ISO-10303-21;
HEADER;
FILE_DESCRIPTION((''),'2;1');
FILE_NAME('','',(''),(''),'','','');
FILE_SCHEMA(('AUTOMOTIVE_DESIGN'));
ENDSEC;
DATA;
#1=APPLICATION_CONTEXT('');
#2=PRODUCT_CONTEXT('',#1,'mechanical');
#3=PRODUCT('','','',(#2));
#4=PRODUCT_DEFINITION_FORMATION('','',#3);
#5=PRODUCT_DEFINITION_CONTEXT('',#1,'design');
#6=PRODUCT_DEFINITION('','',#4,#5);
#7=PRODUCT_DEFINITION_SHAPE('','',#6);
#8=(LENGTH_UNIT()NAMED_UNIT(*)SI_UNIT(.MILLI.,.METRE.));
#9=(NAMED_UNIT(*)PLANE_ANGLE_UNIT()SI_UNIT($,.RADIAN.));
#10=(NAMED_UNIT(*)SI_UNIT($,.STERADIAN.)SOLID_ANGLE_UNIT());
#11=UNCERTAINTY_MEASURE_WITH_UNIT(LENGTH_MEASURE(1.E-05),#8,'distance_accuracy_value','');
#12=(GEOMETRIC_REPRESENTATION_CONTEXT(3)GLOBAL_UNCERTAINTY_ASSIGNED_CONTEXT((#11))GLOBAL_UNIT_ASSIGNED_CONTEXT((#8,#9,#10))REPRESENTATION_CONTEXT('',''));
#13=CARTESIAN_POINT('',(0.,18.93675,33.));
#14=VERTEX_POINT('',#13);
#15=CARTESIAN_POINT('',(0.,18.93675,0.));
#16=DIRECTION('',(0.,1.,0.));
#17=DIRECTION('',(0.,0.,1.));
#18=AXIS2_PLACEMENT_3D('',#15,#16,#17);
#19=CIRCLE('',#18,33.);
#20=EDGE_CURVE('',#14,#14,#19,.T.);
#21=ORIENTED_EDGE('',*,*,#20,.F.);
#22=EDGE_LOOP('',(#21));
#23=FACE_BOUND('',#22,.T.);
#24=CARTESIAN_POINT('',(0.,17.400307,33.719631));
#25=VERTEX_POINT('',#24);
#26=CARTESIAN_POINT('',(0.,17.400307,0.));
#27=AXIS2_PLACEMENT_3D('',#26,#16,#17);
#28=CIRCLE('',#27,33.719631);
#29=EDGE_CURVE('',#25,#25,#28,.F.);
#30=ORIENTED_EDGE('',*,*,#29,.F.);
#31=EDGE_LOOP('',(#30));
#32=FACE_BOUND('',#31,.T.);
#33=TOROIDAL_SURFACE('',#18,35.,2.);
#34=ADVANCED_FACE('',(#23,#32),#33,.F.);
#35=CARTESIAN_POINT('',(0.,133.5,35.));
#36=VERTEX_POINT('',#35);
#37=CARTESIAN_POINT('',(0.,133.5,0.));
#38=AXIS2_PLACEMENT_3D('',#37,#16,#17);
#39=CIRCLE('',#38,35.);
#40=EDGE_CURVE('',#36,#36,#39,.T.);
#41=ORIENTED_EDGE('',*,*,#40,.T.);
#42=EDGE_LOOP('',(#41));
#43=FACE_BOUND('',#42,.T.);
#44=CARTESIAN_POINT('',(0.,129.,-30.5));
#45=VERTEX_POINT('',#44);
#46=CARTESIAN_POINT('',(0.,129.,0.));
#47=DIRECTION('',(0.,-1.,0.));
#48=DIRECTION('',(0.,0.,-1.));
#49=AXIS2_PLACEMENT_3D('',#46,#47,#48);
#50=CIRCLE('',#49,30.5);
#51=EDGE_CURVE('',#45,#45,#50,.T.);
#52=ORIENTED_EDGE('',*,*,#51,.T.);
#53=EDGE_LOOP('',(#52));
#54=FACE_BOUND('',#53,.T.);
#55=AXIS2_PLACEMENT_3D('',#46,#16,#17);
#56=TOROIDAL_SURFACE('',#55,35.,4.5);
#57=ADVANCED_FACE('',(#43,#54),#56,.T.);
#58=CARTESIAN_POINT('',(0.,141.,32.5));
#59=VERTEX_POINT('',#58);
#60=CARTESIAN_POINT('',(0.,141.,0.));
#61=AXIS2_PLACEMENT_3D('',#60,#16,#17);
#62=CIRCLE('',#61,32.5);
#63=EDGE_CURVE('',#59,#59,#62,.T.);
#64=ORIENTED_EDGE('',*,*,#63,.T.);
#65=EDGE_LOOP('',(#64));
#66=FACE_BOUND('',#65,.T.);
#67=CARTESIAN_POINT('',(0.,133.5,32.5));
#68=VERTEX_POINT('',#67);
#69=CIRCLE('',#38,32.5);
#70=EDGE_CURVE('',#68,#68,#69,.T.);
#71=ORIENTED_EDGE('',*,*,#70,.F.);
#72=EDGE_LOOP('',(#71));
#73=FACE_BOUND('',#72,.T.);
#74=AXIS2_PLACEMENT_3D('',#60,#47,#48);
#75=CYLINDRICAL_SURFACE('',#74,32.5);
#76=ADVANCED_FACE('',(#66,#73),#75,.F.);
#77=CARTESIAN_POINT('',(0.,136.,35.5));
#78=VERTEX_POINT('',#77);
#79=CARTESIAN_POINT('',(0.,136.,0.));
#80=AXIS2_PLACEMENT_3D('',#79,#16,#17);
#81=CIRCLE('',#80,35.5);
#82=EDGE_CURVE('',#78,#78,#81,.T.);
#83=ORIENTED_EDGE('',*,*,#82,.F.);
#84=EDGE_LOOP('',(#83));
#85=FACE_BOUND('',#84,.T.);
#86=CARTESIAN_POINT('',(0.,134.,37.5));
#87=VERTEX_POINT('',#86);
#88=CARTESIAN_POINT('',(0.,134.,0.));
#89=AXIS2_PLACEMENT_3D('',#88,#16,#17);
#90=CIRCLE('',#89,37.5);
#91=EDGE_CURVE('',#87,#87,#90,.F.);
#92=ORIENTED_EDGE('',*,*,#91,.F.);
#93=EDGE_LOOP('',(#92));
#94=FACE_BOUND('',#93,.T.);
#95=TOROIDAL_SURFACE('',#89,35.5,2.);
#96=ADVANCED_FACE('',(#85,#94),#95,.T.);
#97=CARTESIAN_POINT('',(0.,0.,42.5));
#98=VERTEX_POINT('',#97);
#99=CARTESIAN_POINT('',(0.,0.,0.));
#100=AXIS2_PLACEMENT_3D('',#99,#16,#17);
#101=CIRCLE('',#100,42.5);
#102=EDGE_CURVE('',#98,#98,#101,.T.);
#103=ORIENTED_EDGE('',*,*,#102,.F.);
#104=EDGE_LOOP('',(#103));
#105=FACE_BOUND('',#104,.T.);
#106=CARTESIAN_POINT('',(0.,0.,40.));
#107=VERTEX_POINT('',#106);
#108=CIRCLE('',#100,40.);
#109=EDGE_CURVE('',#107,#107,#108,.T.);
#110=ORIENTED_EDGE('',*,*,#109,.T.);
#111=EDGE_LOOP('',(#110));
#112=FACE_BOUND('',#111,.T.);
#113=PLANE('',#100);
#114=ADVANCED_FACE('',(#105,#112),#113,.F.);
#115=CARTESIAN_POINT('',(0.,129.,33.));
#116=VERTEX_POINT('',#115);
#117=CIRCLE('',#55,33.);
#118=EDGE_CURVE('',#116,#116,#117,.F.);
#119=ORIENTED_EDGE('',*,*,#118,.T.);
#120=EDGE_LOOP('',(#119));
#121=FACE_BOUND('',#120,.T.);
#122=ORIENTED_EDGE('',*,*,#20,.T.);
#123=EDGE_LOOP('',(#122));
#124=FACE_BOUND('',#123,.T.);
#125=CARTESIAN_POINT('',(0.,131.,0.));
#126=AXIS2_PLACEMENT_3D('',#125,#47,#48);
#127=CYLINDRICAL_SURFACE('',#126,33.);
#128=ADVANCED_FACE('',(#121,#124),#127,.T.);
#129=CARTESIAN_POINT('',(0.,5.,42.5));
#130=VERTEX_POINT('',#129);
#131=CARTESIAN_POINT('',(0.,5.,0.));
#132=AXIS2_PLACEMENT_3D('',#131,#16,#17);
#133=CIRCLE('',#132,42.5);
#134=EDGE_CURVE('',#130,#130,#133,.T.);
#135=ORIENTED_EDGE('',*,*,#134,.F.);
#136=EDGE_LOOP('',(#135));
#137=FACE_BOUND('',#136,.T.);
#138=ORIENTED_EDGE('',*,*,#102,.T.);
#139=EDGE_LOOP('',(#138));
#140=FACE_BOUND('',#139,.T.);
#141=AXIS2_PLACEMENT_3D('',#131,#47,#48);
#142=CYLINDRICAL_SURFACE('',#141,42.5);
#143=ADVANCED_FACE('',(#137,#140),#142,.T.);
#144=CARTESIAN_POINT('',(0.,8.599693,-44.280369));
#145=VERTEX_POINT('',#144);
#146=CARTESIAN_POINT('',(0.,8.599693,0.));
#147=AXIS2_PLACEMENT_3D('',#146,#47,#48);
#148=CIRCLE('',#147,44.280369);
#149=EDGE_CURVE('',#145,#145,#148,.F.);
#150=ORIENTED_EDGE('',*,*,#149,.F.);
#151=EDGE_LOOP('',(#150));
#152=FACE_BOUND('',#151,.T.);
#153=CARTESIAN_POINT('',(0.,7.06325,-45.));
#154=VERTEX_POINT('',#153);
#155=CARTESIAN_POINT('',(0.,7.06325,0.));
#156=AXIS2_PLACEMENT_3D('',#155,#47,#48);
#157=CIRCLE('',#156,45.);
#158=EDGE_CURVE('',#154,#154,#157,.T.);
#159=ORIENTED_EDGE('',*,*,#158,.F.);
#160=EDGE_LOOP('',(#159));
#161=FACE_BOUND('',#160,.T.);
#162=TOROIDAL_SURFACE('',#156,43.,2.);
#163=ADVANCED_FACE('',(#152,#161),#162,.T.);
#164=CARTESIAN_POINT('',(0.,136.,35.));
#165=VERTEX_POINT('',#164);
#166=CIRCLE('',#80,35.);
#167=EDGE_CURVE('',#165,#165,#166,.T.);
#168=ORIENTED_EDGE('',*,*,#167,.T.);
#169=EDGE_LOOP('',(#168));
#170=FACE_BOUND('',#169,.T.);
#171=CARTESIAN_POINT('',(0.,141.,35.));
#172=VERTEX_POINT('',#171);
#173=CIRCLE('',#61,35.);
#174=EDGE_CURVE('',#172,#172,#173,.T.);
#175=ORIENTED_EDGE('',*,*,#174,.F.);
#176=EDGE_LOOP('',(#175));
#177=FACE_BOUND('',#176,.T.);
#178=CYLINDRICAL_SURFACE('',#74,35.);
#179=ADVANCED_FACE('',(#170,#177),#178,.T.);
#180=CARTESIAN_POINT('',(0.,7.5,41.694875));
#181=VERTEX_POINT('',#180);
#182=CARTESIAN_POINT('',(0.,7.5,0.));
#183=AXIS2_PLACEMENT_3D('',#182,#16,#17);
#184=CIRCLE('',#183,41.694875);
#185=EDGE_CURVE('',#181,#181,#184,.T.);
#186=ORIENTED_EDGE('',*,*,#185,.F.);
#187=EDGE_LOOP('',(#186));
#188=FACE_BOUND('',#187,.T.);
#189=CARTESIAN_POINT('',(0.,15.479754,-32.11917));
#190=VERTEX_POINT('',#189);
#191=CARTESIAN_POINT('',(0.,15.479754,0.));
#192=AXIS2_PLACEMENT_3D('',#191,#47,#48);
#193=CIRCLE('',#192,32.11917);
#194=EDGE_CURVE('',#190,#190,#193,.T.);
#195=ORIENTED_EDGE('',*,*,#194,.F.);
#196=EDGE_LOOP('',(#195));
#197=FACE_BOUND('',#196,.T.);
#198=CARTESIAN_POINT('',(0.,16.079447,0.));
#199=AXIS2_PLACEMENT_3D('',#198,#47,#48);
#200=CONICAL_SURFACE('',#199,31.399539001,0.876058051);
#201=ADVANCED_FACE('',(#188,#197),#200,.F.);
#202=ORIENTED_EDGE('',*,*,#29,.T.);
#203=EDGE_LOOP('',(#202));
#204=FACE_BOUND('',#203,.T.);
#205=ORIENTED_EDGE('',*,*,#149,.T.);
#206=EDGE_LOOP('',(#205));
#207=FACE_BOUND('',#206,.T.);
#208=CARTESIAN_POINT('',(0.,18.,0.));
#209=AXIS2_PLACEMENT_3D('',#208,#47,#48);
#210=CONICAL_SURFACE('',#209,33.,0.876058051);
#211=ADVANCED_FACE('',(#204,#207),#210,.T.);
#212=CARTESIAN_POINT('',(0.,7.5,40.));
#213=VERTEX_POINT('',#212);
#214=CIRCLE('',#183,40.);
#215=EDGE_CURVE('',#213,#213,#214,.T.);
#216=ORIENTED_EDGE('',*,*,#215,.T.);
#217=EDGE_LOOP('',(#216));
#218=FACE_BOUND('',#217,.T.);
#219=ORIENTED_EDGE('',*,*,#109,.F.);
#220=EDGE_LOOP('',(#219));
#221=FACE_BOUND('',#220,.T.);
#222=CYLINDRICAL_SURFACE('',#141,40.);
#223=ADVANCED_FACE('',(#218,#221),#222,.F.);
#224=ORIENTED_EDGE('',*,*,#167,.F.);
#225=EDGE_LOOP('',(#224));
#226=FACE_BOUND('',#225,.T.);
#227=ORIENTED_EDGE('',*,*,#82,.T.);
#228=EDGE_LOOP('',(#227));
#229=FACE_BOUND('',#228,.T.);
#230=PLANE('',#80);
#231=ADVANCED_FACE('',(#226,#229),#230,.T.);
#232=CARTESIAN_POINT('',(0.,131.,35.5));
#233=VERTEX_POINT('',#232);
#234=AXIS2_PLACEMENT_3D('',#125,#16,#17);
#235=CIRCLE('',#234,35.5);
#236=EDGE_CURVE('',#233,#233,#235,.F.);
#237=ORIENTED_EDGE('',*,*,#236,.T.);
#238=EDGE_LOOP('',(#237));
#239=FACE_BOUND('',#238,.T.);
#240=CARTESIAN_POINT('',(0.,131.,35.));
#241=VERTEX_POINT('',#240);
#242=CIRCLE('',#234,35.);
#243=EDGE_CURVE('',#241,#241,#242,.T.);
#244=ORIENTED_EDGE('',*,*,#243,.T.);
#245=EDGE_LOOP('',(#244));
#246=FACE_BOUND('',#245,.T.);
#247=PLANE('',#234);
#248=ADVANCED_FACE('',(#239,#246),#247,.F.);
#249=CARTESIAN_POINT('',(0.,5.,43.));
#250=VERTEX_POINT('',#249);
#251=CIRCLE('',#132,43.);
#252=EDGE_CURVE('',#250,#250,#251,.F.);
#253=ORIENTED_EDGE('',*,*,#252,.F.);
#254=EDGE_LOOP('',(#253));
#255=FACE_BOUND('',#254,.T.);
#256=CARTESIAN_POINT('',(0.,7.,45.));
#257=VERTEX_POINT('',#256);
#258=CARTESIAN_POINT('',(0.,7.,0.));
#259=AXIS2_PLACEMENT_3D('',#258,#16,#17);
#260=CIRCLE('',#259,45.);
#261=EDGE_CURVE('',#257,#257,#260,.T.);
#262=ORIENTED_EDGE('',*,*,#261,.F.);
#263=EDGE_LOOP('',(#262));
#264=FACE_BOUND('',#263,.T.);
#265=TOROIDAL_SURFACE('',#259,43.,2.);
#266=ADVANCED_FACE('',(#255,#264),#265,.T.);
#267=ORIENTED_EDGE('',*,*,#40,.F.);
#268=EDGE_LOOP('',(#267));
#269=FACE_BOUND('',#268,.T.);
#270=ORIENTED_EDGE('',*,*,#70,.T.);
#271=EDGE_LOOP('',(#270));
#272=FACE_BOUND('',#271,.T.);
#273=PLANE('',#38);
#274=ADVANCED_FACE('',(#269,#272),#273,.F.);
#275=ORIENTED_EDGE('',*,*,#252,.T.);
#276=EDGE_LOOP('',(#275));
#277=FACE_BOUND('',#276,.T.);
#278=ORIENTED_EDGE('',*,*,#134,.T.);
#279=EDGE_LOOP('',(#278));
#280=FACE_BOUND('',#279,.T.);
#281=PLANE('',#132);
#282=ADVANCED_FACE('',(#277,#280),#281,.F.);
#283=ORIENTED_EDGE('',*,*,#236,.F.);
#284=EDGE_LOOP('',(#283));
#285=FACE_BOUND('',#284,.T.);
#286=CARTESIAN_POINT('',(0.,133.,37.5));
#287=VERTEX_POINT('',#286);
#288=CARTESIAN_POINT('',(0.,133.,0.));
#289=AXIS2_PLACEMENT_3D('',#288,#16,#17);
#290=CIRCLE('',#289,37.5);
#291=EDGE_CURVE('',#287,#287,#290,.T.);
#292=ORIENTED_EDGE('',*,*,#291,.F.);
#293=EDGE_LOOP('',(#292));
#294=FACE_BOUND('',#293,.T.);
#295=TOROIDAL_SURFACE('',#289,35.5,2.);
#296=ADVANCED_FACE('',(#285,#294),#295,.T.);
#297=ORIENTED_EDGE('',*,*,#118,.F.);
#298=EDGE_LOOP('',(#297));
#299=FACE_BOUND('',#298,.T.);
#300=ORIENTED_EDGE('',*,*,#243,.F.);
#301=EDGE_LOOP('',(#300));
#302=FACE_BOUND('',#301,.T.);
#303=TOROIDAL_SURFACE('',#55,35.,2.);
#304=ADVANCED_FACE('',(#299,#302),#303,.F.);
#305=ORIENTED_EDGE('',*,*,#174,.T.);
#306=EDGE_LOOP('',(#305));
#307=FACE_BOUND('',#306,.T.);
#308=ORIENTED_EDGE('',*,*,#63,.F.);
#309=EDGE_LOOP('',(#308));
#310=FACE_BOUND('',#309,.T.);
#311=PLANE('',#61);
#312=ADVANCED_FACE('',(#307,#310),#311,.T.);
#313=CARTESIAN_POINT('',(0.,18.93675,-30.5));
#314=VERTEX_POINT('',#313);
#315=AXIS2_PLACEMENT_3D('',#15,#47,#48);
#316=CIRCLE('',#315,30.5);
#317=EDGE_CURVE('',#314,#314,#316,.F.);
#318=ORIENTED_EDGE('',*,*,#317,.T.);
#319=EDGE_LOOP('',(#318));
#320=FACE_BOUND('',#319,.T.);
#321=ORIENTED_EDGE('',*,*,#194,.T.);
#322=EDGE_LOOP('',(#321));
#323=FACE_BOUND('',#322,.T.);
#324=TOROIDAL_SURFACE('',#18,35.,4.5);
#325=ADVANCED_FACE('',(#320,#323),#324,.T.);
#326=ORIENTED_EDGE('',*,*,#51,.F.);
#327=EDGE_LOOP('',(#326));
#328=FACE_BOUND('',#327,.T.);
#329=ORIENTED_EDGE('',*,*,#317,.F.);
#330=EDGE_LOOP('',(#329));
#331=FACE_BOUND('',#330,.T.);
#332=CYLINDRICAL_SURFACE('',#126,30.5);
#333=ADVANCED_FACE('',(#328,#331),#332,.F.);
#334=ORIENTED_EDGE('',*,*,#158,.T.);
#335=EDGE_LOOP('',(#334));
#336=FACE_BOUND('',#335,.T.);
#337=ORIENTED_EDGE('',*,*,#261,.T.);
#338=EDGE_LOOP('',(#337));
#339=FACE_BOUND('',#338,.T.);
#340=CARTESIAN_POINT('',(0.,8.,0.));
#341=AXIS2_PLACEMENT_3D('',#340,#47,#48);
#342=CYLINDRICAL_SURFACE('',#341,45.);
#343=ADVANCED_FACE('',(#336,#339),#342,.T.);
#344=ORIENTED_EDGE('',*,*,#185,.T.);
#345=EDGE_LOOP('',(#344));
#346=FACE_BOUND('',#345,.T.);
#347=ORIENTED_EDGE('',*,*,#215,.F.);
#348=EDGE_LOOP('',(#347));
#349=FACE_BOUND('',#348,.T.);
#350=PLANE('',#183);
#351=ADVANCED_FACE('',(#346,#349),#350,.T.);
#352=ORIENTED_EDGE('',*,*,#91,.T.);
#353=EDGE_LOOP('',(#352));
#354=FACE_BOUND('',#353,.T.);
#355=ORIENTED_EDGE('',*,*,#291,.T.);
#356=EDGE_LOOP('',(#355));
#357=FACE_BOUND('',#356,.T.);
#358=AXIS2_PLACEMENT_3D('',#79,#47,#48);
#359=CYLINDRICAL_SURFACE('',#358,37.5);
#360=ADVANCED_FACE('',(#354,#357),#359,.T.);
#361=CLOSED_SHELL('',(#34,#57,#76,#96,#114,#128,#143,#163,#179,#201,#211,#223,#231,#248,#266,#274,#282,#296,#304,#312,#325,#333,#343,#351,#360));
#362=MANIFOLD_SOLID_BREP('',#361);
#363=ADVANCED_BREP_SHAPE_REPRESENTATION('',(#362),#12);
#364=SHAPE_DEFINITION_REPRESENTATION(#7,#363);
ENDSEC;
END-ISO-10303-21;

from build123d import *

# Parameters (mm, degrees)
SKETCH1_R           = 42.5
BOSS_EXTRUDE1_DEPTH = 5
SKETCH2_R           = 45
BOSS_EXTRUDE2_DEPTH = 3
SKETCH3_R           = 33
BOSS_EXTRUDE3_START = -18
SKETCH4_R           = 33
BOSS_EXTRUDE3_DEPTH = 131
SKETCH5_R           = 37.5
BOSS_EXTRUDE4_DEPTH = 5
FILLET1_R           = 2
FILLET2_R           = 2
SKETCH7_R           = 35
BOSS_EXTRUDE5_DEPTH = 5


# Read off the part's stored shape, not the designer's step: Shell1
with BuildPart() as part:
    # Sketch1 → Boss-Extrude1 (new body)
    with BuildSketch(Plane(origin=(0, 0, 0), x_dir=(1, 0, 0), z_dir=(0, 1, 0))):
        with Locations(Location((0, 0, 0), (0, 0, 270))):
            Circle(SKETCH1_R)
    extrude(amount=BOSS_EXTRUDE1_DEPTH)

    # Sketch2 → Boss-Extrude2 (add)
    with BuildSketch(Plane(origin=(0, 5, 0), x_dir=(1, 0, 0), z_dir=(0, 1, 0))):
        with Locations(Location((0, 0, 0), (0, 0, 270))):
            Circle(SKETCH2_R)
    extrude(amount=BOSS_EXTRUDE2_DEPTH)

    # Sketch3 → section 1 of loft1
    with BuildSketch(Plane(origin=(0, 18, 0), x_dir=(1, 0, 0), z_dir=(0, 1, 0)), mode=Mode.PRIVATE) as loft1_s1:
        Circle(SKETCH3_R)
    # loft from a face of the part (loft1)
    loft([part.faces().sort_by_distance((0, 8, 0))[0], loft1_s1.sketch])

    # Sketch4 → Boss-Extrude3 (add)
    with BuildSketch(Plane(origin=(0, 18, 0), x_dir=(1, 0, 0), z_dir=(0, 1, 0)).offset(BOSS_EXTRUDE3_START)):
        with Locations(Location((0, 0, 0), (0, 0, 270))):
            Circle(SKETCH4_R)
    extrude(amount=BOSS_EXTRUDE3_DEPTH)

    # Sketch5 → Boss-Extrude4 (add)
    with BuildSketch(Plane(origin=(0, 131, 0), x_dir=(1, 0, 0), z_dir=(0, 1, 0))):
        with Locations(Location((0, 0, 0), (0, 0, 270))):
            Circle(SKETCH5_R)
    extrude(amount=BOSS_EXTRUDE4_DEPTH)

    # Fillet1
    fillet1_edges = [part.edges().sort_by_distance(p)[0] for p in [
        (0, 18, -33),
        (0, 131, -33),
        (0, 5, -45),
        (0, 8, -45),
    ]]
    fillet(fillet1_edges, radius=FILLET1_R)

    # Fillet2
    fillet2_edges = [part.edges().sort_by_distance(p)[0] for p in [
        (0, 131, -37.5),
        (0, 136, -37.5),
    ]]
    fillet(fillet2_edges, radius=FILLET2_R)

    # Sketch7 → Boss-Extrude5 (add)
    with BuildSketch(Plane(origin=(0, 136, 0), x_dir=(1, 0, 0), z_dir=(0, 1, 0))):
        with Locations(Location((0, 0, 0), (0, 0, 270))):
            Circle(SKETCH7_R)
    extrude(amount=BOSS_EXTRUDE5_DEPTH)

    # Shell1 outline → Shell1 (revolve, cut)
    with BuildSketch(Plane.XY):
        with BuildLine():
            ThreePointArc((32.119170202, 15.479754134), (30.924847604, 17.028050609), (30.5, 18.936749892))
            Line((30.5, 18.936749892), (30.5, 129))
            ThreePointArc((30.5, 129), (31.818019485, 132.181980515), (35, 133.5))
            Line((35, 133.5), (32.5, 133.5))
            Line((32.5, 133.5), (32.5, 141))
            Line((32.5, 141), (0, 141))
            Line((0, 141), (0, 0))
            Line((0, 0), (40, 0))
            Line((40, 0), (40, 7.5))
            Line((40, 7.5), (41.694875162, 7.5))
            Line((41.694875162, 7.5), (32.119170202, 15.479754134))
        make_face()
    revolve(axis=Axis((0, 0, 0), (0, 1, 0)), mode=Mode.SUBTRACT)


solid = part.part
